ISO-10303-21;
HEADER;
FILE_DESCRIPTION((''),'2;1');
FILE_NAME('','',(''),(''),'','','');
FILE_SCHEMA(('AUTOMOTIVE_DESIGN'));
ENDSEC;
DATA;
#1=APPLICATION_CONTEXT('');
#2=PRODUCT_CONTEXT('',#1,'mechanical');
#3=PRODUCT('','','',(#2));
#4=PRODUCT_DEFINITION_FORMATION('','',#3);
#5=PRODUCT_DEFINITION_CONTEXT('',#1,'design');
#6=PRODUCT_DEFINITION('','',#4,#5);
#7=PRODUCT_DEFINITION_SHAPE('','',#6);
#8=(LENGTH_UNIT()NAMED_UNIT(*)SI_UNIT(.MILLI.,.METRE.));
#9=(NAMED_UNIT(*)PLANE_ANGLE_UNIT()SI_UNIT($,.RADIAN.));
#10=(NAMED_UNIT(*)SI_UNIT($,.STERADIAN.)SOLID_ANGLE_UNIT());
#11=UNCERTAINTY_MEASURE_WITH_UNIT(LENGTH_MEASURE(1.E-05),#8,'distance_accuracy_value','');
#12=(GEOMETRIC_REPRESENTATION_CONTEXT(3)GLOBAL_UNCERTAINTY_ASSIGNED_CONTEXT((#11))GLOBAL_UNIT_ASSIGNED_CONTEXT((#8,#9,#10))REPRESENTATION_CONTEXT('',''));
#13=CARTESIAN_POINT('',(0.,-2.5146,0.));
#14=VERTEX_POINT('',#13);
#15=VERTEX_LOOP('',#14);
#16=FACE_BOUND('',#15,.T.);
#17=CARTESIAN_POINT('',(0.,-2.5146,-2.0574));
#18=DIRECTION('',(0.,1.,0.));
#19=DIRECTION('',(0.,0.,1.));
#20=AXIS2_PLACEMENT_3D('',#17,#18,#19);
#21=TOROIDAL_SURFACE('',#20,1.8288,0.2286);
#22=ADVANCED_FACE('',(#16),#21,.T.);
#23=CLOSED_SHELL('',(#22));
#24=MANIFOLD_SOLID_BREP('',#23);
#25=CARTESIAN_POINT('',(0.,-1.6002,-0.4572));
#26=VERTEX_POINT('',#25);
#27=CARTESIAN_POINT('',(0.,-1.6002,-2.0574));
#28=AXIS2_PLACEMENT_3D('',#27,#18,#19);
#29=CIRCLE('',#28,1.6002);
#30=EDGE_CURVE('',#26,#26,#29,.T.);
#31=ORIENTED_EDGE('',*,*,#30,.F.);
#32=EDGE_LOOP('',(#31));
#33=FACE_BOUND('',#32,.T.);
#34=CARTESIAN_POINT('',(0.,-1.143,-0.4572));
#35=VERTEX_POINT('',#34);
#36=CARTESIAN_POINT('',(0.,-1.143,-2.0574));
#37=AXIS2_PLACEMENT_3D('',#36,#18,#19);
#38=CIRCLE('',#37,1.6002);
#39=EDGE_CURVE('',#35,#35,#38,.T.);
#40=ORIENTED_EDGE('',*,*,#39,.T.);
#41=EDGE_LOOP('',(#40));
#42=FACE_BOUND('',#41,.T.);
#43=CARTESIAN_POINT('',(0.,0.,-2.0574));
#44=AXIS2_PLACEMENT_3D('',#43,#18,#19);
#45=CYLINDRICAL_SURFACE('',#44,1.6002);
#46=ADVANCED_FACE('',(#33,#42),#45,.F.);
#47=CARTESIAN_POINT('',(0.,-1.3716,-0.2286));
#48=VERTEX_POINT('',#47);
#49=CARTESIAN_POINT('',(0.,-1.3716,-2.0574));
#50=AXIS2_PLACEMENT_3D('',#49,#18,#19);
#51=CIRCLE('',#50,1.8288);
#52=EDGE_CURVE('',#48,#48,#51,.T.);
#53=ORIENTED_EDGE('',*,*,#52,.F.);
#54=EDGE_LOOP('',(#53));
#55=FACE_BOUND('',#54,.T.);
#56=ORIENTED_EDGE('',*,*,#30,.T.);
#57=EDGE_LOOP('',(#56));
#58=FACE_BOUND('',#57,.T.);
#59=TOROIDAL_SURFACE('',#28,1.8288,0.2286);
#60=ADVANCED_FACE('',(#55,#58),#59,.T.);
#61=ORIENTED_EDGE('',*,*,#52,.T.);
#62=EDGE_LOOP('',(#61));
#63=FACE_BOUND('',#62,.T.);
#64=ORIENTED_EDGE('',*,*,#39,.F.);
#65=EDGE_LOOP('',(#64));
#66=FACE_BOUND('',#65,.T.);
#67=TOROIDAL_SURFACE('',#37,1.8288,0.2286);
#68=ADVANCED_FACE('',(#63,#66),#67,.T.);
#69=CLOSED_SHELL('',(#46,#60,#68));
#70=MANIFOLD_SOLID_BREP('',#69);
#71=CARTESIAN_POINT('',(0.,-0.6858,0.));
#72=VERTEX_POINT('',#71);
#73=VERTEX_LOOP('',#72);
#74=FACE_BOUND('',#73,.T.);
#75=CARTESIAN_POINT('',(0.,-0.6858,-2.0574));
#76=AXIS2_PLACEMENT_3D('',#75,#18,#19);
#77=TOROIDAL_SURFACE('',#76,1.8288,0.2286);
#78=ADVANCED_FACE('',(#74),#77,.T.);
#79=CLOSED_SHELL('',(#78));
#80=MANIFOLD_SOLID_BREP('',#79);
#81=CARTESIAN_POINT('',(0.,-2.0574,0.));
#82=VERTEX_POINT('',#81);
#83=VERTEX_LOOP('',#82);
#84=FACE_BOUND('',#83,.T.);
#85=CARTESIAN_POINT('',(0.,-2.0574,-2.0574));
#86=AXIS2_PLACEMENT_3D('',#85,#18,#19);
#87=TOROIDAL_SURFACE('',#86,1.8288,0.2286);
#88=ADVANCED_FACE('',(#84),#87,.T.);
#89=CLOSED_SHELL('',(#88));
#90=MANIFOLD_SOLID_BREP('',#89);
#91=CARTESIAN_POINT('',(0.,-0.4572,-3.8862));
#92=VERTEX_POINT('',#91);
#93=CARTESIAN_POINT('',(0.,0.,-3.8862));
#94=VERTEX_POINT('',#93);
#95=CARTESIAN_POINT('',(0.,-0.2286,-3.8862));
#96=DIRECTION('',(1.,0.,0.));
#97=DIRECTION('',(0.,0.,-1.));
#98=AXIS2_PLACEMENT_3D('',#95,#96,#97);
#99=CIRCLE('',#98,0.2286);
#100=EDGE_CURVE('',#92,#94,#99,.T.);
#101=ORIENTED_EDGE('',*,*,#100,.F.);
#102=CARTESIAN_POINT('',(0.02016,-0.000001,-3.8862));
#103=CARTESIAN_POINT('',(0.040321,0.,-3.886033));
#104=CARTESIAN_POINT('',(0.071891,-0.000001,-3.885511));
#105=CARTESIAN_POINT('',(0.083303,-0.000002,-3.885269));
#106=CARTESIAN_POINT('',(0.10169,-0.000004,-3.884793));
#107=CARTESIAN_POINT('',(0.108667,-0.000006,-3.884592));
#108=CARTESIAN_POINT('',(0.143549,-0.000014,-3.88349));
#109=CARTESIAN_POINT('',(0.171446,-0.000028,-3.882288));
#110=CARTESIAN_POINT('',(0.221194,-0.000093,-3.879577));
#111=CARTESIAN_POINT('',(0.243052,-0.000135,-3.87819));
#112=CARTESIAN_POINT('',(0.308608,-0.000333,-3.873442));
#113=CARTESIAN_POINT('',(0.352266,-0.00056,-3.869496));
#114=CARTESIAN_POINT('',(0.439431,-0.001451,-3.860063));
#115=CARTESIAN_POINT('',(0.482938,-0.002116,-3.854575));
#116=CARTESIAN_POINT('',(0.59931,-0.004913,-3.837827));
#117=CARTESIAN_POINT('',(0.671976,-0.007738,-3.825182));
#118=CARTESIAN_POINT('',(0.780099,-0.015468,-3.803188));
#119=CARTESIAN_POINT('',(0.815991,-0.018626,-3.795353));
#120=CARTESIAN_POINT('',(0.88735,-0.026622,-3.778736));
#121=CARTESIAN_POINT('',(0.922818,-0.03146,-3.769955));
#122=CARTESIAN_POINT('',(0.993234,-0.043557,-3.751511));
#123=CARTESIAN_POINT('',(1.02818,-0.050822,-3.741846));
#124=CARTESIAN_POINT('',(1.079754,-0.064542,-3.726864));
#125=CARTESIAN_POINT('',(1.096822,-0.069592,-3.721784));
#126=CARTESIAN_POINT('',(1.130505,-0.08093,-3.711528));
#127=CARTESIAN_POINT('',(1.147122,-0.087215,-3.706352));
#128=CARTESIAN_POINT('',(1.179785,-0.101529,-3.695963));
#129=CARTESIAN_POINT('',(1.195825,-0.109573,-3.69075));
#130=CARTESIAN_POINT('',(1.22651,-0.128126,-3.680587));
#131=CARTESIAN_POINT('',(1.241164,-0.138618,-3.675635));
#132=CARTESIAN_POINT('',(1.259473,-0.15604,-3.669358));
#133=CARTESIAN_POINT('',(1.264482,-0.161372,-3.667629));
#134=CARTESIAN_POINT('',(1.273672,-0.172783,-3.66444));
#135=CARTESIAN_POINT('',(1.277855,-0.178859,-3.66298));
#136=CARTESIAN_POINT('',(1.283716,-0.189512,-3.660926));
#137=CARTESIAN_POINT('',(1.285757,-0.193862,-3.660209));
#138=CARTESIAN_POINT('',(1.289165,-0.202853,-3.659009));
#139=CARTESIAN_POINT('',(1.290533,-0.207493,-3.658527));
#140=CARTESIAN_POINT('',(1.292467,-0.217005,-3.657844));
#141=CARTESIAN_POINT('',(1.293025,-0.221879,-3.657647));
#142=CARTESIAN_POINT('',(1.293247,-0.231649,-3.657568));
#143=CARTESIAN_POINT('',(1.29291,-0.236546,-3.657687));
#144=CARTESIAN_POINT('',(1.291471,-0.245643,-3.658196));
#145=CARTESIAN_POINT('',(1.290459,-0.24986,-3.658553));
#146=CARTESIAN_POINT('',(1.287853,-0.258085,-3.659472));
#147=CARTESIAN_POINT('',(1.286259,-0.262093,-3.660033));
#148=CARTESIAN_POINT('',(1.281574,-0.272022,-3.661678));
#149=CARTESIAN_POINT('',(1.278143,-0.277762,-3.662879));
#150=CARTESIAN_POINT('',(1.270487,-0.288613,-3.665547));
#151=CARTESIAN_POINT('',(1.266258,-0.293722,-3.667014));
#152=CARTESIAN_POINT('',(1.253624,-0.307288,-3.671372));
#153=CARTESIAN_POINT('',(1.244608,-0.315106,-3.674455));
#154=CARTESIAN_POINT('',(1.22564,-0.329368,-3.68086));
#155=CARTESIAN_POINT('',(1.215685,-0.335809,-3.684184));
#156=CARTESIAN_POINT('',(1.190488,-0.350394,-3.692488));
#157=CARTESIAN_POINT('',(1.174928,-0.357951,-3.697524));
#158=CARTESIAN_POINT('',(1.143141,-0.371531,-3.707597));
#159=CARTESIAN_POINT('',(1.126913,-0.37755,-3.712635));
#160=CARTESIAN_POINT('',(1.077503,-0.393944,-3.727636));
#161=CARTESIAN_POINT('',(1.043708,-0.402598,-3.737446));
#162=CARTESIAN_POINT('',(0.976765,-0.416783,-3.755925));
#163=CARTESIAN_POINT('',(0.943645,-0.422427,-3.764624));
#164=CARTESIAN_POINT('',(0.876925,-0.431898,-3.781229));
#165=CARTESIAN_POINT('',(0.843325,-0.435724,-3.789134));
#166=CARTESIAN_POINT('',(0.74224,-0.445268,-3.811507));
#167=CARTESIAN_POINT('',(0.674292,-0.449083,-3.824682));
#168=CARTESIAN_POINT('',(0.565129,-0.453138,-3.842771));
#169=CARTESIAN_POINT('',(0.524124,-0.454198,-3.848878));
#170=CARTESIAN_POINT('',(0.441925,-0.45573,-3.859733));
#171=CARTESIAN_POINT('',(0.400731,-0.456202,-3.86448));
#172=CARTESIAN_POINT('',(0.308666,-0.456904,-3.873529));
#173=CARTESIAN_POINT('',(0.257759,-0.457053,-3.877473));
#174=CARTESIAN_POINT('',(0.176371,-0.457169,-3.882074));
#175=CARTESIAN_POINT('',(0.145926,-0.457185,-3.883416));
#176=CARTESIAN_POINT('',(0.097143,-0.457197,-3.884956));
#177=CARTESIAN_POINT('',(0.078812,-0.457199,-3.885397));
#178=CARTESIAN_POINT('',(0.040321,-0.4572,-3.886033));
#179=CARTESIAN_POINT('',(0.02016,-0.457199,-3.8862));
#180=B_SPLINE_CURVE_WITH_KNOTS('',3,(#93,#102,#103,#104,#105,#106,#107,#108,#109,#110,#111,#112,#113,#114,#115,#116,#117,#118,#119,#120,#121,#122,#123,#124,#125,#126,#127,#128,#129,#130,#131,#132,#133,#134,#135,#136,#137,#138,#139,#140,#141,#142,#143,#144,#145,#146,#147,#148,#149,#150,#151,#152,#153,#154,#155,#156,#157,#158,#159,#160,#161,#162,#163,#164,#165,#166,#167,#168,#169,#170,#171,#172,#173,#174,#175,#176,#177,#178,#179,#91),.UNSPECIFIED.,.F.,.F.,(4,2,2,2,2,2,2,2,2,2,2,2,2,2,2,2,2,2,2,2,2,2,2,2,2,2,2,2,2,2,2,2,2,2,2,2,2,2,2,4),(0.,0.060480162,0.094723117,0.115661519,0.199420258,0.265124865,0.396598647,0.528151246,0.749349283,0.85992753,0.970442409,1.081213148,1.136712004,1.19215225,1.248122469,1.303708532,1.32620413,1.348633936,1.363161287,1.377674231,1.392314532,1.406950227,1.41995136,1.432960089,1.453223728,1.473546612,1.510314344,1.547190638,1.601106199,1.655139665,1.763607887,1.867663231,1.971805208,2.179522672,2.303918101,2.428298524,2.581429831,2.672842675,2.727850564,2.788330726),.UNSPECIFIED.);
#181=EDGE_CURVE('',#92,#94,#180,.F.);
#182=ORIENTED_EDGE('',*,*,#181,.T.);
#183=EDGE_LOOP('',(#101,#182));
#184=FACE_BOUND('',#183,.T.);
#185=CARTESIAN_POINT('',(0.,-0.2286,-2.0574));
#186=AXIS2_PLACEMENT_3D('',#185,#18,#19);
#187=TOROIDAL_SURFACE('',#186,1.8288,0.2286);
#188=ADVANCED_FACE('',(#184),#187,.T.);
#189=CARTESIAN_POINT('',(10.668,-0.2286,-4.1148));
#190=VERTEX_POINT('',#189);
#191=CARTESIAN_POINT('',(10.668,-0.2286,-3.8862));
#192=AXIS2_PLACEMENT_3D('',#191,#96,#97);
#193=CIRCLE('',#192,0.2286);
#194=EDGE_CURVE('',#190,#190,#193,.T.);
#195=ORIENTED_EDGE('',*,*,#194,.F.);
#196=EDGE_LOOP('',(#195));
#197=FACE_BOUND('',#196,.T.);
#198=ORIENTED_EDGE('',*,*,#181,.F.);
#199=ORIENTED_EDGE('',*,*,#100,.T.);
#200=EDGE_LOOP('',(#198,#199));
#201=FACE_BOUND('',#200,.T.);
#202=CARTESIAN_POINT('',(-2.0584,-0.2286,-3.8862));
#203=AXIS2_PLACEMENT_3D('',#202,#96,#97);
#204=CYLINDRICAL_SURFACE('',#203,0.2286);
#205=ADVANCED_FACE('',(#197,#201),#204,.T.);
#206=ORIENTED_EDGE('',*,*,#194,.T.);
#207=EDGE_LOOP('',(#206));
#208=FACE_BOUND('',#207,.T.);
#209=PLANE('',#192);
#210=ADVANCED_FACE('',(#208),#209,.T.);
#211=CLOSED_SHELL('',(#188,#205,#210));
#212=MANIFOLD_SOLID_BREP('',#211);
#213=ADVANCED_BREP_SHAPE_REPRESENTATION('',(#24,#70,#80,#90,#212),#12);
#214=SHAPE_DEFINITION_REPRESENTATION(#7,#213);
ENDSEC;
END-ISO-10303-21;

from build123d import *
from build123d.topology import SkipClean

# Parameters (mm, degrees)
SKETCH1_R               = 0.2286
BOSS_EXTRUDE1_START     = -10.6680001
BOSS_EXTRUDE1_OUTLINE_R = 0.2286
BOSS_EXTRUDE1_DEPTH     = 10.6680001


# Read off the part's stored shape, not the designer's step: Boss-Extrude1
with BuildPart() as part:
    # Sketch1 → Revolve1 (revolve)
    with SkipClean():  # the faces are left unmerged after this step: merging them gives an invalid solid
        with BuildSketch(Plane(origin=(0, 0, 0), x_dir=(0, 0, -1), z_dir=(1, 0, 0))):
            with Locations((0.2286, -0.2286)):
                Circle(SKETCH1_R)
            with Locations((0.2286, -2.5146)):
                Circle(SKETCH1_R)
            with Locations((0.2286, -0.6858)):
                Circle(SKETCH1_R)
            with Locations((0.2286, -2.0574)):
                Circle(SKETCH1_R)
            with BuildLine():
                Line((0.4572, -1.143), (0.4572, -1.6002))
                ThreePointArc((0.4572, -1.6002), (0.06695539, -1.76184461), (0.2286, -1.3716))
                ThreePointArc((0.2286, -1.3716), (0.06695539, -0.98135539), (0.4572, -1.143))
            make_face()
        revolve(axis=Axis((0, 0, -2.0574), (0, -1, 0)))

    # Boss-Extrude1 outline → Boss-Extrude1 (add)
    with BuildSketch(Plane(origin=(10.668, 0, 0), x_dir=(0, 0, -1), z_dir=(1, 0, 0)).offset(BOSS_EXTRUDE1_START)):
        with Locations((3.8862, -0.2286)):
            Circle(BOSS_EXTRUDE1_OUTLINE_R)
    extrude(amount=BOSS_EXTRUDE1_DEPTH)


solid = part.part
